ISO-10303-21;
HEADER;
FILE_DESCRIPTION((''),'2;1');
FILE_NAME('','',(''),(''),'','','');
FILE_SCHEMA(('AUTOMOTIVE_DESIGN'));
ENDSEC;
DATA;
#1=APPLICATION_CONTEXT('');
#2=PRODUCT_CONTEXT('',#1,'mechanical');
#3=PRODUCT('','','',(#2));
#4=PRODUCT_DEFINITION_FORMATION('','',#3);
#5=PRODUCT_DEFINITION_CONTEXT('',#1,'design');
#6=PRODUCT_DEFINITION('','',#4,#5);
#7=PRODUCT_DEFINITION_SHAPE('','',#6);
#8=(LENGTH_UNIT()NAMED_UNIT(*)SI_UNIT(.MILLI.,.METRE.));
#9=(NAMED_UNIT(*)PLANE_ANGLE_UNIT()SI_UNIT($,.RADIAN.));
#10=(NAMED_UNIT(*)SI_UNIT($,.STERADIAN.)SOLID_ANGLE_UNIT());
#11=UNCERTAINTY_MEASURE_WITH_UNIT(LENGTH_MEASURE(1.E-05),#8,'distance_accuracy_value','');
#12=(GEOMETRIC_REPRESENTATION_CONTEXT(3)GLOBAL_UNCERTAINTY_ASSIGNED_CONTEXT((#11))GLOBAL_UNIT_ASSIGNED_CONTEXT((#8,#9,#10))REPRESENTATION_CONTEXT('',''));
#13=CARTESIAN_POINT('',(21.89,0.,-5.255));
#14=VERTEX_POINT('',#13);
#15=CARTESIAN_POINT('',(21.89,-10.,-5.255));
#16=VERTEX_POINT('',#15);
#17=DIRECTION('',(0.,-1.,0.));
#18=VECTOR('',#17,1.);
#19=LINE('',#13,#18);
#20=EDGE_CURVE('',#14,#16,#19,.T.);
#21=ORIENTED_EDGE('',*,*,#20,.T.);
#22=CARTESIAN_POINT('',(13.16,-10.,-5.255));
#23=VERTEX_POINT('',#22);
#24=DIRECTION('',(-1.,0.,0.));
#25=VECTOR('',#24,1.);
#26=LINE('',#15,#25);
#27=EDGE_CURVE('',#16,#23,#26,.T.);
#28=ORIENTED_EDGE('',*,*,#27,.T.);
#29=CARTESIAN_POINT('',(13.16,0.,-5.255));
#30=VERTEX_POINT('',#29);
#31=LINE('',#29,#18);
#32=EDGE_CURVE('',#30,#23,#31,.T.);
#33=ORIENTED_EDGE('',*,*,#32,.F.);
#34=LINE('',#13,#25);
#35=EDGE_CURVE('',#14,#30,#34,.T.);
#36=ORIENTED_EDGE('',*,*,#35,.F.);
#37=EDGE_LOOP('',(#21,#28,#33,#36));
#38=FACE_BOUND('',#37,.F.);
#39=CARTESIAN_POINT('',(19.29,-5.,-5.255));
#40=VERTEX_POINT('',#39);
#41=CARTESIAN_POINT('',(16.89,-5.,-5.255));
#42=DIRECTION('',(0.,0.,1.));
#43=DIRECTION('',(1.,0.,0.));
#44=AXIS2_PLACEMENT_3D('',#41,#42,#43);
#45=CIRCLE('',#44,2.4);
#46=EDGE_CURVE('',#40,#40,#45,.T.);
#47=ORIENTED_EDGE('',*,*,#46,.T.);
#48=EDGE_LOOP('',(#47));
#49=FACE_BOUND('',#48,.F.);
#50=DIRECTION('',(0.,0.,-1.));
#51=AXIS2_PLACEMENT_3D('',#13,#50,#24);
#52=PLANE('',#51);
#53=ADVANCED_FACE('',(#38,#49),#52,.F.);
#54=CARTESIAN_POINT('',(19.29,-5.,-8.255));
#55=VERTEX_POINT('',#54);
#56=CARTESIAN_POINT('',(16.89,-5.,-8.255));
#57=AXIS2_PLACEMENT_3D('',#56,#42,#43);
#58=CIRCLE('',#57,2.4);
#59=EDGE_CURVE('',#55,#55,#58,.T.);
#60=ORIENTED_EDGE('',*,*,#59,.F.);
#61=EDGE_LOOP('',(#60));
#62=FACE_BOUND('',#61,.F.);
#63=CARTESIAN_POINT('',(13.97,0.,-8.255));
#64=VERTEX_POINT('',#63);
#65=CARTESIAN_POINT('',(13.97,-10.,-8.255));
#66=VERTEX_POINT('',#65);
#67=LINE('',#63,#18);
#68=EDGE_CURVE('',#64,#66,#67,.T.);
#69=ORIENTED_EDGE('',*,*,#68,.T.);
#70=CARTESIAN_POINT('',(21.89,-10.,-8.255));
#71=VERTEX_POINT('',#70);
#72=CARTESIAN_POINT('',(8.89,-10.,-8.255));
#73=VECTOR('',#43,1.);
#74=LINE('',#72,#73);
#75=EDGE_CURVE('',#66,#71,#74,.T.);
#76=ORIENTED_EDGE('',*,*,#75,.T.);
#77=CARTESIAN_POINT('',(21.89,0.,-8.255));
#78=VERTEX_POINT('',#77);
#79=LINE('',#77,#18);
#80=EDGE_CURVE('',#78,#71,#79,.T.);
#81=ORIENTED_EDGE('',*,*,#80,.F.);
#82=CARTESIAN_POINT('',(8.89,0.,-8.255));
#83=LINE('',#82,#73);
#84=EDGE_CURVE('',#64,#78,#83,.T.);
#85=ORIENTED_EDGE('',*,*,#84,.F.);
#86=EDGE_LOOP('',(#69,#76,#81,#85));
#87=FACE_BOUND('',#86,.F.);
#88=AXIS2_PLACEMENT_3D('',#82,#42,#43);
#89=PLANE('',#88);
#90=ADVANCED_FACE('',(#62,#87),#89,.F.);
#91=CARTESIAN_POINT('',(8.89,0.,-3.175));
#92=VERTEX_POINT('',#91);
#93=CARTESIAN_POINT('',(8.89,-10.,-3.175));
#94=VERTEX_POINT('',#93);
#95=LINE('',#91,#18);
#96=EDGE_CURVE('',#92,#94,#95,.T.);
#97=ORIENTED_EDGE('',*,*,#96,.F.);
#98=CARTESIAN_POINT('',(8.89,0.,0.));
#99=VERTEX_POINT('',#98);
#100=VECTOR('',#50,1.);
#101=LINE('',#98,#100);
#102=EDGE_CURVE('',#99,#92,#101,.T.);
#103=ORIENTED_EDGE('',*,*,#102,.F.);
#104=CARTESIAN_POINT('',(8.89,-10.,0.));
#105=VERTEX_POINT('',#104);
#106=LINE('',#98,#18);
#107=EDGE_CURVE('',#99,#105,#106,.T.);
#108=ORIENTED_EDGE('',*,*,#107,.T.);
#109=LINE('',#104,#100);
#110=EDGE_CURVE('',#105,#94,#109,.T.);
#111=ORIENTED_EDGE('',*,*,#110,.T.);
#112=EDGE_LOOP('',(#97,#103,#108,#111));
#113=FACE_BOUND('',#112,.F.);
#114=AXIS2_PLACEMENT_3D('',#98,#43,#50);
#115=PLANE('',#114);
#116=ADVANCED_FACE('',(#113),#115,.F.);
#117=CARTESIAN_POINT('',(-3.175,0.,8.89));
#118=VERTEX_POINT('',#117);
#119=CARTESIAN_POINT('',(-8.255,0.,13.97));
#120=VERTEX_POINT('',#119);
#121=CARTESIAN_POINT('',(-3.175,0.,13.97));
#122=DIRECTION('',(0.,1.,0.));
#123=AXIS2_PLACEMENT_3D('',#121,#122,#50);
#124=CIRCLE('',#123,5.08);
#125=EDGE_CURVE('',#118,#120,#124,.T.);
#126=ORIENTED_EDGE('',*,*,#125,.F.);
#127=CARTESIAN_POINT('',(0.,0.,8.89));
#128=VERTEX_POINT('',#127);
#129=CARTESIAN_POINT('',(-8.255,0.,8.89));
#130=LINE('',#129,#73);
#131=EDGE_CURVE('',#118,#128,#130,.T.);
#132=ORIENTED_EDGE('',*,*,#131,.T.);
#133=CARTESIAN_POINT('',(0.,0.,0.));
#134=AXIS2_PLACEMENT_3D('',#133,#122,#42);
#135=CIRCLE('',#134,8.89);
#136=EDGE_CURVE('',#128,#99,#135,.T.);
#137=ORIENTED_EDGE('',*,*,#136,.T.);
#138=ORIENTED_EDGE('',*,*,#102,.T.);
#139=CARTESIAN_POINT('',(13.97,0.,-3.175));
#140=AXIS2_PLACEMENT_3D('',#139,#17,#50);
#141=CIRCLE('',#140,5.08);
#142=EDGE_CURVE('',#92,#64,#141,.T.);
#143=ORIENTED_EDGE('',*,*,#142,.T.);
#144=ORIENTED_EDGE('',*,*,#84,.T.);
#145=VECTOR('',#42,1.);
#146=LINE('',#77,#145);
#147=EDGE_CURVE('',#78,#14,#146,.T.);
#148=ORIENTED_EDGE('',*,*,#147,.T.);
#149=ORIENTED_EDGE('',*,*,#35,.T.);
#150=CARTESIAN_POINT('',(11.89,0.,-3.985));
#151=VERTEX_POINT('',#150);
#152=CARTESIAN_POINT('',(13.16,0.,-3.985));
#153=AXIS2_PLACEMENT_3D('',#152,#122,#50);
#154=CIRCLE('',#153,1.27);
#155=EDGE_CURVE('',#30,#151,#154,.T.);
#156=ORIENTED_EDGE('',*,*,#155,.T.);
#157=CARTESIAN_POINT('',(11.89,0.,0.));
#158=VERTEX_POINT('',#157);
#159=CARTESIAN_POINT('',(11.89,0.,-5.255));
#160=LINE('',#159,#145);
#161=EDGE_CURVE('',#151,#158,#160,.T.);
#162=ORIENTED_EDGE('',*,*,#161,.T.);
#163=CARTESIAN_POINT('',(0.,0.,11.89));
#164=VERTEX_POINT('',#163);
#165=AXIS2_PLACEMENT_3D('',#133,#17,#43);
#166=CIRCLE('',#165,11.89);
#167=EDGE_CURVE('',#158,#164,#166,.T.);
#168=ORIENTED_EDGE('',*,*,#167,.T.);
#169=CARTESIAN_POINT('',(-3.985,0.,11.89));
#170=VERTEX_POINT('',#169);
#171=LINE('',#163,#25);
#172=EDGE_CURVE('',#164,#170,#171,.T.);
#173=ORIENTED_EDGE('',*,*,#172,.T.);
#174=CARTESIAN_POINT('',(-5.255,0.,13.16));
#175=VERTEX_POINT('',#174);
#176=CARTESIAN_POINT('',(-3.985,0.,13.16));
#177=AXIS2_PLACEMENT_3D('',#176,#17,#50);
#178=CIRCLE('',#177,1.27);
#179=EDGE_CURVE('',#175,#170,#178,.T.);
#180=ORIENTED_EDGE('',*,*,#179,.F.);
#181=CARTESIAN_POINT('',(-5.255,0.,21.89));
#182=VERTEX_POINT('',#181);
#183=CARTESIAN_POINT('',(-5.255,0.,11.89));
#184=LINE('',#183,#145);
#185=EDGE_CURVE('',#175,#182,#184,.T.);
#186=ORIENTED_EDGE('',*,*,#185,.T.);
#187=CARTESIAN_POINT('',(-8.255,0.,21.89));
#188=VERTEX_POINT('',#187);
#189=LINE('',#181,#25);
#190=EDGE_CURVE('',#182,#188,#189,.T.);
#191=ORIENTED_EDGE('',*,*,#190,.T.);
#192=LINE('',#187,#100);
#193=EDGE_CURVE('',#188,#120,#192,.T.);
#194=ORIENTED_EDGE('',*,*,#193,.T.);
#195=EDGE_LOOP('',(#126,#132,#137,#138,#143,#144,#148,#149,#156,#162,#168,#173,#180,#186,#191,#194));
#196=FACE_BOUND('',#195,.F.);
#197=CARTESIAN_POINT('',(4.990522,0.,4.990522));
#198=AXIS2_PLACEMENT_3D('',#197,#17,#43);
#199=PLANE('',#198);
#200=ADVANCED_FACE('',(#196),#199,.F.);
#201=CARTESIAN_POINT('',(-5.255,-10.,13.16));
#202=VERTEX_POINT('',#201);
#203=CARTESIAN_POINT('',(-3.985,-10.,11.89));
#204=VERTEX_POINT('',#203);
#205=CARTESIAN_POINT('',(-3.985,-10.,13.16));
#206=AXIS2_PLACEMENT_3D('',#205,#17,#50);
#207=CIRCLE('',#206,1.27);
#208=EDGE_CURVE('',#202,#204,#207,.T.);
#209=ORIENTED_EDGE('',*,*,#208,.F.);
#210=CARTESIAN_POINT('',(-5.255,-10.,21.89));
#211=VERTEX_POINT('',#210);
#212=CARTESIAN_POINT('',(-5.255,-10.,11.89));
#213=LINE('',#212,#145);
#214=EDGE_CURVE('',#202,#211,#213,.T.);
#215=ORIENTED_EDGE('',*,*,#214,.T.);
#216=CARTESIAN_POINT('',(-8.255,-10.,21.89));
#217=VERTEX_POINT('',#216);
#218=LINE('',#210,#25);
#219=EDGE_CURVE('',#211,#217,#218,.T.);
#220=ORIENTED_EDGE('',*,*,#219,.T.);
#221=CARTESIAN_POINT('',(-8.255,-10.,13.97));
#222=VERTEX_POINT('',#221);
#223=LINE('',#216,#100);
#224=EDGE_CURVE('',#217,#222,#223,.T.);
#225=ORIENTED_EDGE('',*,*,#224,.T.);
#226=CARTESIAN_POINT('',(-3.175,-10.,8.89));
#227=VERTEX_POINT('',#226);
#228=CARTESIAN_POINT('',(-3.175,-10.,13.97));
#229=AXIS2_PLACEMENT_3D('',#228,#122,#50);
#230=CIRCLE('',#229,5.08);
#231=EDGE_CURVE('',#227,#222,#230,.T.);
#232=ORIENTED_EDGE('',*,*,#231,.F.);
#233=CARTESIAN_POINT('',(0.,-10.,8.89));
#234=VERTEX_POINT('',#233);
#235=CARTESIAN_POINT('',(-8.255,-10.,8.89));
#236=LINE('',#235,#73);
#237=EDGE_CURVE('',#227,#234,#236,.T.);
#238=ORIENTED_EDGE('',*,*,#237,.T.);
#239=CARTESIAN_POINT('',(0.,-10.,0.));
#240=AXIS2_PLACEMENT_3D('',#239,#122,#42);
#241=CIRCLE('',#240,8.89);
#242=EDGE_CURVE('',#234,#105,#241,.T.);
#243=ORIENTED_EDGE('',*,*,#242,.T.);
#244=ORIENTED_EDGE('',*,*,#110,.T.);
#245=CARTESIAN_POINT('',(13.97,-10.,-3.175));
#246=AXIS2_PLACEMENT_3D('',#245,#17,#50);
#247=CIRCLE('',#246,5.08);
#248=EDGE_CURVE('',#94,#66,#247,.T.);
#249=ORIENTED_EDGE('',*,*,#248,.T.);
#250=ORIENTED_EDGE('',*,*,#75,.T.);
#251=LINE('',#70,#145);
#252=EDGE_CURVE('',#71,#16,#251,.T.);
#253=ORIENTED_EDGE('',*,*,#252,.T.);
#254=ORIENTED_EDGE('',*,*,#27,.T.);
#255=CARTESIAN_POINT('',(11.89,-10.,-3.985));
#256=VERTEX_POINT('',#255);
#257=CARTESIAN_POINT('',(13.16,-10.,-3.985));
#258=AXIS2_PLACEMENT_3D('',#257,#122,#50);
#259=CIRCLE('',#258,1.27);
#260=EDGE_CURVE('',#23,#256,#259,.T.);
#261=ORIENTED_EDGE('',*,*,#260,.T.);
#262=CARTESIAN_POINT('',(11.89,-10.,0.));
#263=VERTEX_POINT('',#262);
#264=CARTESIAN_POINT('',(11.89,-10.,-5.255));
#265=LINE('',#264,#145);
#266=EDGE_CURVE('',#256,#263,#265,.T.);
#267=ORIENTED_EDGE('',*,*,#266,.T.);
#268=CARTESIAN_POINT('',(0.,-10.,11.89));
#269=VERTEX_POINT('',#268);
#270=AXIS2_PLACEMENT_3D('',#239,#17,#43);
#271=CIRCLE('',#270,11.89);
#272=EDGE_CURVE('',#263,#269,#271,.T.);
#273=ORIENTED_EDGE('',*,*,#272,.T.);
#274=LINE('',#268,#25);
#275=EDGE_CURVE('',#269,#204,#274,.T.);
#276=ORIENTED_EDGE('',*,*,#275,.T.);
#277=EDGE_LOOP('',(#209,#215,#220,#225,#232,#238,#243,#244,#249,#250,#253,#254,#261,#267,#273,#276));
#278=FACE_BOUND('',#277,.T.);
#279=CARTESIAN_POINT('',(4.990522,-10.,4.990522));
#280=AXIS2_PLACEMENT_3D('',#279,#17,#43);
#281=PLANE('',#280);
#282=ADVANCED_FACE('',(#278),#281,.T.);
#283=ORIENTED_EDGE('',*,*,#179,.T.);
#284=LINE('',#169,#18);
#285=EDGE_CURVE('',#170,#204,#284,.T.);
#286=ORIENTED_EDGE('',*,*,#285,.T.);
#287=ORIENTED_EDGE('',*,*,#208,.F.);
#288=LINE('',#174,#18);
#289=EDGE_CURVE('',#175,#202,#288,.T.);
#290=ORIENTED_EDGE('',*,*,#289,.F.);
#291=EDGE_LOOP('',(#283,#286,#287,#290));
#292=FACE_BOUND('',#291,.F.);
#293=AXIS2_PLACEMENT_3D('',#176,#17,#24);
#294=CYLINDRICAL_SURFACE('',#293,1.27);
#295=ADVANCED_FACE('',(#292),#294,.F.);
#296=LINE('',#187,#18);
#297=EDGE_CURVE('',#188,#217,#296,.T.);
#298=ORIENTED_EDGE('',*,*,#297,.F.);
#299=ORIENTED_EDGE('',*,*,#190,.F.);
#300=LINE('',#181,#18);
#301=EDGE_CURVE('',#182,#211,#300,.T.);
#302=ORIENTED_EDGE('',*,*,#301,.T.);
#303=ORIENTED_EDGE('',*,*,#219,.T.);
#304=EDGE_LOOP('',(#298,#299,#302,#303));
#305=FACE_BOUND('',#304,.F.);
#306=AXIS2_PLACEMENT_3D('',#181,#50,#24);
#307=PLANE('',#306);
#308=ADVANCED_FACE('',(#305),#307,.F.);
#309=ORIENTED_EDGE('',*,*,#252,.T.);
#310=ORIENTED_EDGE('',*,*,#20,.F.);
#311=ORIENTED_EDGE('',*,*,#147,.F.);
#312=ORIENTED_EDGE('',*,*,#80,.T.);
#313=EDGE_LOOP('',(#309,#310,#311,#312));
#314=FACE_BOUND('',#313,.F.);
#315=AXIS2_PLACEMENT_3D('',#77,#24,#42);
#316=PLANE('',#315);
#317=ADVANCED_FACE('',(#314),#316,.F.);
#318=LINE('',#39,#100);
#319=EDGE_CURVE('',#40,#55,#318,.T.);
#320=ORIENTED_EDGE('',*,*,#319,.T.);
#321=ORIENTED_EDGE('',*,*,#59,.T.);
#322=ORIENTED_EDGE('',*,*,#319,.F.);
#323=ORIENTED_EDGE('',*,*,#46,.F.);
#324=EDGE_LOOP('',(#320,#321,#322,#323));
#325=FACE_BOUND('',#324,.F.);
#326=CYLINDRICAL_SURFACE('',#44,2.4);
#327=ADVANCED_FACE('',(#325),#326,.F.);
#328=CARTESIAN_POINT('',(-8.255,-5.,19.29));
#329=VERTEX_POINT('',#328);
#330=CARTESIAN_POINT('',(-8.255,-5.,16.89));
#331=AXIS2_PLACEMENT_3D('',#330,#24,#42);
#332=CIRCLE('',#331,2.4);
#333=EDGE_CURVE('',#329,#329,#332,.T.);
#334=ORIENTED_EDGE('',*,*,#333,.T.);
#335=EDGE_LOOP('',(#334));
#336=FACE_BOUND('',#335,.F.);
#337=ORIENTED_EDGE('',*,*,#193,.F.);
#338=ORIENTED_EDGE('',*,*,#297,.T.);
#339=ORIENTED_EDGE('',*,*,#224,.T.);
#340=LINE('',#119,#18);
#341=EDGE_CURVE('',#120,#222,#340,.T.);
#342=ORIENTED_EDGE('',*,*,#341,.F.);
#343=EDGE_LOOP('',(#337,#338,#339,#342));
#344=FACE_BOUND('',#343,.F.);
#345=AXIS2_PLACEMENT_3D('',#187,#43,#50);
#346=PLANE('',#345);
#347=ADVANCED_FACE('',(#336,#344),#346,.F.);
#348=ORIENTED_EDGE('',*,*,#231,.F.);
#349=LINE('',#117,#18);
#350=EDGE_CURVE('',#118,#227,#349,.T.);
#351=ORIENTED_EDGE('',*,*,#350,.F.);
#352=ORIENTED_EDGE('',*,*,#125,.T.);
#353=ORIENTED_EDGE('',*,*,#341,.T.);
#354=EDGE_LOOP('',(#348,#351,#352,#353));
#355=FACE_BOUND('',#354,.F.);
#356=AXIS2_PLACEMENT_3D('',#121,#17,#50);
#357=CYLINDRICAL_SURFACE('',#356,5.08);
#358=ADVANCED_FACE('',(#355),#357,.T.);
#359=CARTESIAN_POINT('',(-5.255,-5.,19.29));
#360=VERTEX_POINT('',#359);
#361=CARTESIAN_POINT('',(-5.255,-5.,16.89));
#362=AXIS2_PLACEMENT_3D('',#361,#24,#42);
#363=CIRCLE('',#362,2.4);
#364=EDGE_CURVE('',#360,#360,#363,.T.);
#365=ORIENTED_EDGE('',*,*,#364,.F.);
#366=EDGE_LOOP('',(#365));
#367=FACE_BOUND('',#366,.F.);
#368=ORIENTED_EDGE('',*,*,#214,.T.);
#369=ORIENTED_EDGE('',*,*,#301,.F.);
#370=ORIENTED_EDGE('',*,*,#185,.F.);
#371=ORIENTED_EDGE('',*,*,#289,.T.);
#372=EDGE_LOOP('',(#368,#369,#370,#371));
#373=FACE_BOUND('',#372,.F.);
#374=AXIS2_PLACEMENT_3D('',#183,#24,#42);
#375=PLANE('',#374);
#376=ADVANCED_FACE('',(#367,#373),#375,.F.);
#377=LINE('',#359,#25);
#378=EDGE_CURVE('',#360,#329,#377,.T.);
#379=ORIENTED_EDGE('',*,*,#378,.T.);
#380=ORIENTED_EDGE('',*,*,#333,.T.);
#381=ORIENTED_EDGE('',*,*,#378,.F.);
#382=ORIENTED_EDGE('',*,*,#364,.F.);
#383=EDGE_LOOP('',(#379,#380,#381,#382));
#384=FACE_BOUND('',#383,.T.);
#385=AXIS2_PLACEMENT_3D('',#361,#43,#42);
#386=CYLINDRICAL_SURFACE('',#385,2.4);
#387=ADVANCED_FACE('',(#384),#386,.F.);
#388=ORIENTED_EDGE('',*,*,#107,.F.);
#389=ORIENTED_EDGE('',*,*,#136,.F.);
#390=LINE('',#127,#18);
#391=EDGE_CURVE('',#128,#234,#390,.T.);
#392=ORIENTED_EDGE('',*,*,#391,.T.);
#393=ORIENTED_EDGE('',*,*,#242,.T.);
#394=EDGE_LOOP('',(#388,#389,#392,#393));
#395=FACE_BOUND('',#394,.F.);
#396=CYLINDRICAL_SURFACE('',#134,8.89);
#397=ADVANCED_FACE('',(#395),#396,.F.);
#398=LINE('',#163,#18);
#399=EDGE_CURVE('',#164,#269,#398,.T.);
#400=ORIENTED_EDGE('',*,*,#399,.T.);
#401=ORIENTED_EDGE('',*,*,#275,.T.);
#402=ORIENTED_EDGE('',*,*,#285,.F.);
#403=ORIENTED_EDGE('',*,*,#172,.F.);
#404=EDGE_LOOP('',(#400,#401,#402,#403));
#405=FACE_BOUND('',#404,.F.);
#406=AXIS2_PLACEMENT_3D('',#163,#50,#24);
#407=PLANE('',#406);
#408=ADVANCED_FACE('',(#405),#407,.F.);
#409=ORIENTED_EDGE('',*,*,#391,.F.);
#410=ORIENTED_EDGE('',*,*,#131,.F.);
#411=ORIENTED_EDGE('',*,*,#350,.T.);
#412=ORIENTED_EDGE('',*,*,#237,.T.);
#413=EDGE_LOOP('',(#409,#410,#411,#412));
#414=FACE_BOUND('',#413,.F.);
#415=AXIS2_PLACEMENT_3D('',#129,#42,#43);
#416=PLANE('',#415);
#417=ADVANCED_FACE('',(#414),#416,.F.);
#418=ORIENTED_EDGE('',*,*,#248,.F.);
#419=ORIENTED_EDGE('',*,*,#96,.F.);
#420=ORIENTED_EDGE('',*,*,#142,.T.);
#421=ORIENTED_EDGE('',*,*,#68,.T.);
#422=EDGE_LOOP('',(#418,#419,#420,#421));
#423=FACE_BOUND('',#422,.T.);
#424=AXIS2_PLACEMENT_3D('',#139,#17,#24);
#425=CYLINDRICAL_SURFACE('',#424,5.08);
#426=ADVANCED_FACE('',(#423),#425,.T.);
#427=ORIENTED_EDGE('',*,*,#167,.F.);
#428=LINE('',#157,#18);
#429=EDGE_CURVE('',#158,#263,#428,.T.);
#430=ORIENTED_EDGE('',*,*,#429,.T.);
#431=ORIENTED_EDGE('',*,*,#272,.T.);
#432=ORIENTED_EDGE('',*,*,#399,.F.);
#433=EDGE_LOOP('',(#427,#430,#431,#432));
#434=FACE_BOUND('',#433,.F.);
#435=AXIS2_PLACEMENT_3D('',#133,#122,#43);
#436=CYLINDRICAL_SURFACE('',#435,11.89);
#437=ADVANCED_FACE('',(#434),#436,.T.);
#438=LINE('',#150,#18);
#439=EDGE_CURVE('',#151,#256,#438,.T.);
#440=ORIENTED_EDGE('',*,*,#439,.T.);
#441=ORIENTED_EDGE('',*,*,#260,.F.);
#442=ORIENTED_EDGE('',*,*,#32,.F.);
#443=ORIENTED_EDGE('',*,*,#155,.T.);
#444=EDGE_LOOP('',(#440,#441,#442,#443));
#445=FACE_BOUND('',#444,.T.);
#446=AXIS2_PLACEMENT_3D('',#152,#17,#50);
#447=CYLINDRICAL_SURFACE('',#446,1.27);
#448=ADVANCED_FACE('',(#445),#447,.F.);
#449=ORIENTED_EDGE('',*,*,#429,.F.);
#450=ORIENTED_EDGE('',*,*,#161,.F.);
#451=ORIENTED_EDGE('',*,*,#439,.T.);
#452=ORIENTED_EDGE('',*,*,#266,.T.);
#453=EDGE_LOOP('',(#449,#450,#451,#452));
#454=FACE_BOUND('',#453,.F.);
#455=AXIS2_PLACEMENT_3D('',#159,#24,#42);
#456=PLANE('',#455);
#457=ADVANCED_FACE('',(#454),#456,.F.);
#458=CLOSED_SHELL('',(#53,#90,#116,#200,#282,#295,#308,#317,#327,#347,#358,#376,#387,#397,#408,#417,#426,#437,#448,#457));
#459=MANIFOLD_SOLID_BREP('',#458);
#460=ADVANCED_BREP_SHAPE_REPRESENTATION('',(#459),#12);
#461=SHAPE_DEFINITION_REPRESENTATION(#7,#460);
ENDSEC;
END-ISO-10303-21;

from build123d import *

# Parameters (mm, degrees)
F1_DEPTH = 10
F2_R     = 2.4
F3_DEPTH = 3
F7_R     = 5.08
F8_R     = 1.27


# Not quite as in the source:
# - a pattern or mirror of a feature is missing from the dataset's text; its kind, count and spacing are read off the source's solid


with BuildPart() as f1:
    # F0 (on Front) → F1 (new body)
    with BuildSketch(Plane.XZ):
        with BuildLine():
            ThreePointArc((0, 8.89), (6.2861792847, 6.2861792847), (8.89, 0))
            Line((8.89, 0), (8.89, -8.255))
            Line((8.89, -8.255), (21.89, -8.255))
            Line((21.89, -8.255), (21.89, -5.255))
            Line((21.89, -5.255), (11.89, -5.255))
            Line((11.89, -5.255), (11.89, 0))
            ThreePointArc((11.89, 0), (8.4074996283, 8.4074996283), (0, 11.89))
            Line((0, 11.89), (-5.255, 11.89))
            Line((-5.255, 11.89), (-5.255, 21.89))
            Line((-5.255, 21.89), (-8.255, 21.89))
            Line((-8.255, 21.89), (-8.255, 8.89))
            Line((-8.255, 8.89), (0, 8.89))
        make_face()
    extrude(amount=F1_DEPTH)

    # F2 (on face) → F3 (cut, through all)
    with BuildSketch(Plane.XY.offset(-5.255)):
        with Locations((16.89, -5)):
            Circle(F2_R)
    f3 = extrude(amount=-F3_DEPTH, mode=Mode.SUBTRACT)

    # F3_copies: F3 across plane
    add(f3.mirror(Plane(origin=(0, 0, 0), x_dir=(-0.7071067812, 0, -0.7071067812), z_dir=(-0.7071067812, 0, 0.7071067812))), mode=Mode.SUBTRACT)

    # F7
    f7_edges = [f1.edges().sort_by_distance(p)[0] for p in [
        (-8.255, -5, 8.89),
        (8.89, -5, -8.255),
    ]]
    fillet(f7_edges, radius=F7_R)

    # F8
    f8_edges = [f1.edges().sort_by_distance(p)[0] for p in [
        (-5.255, -5, 11.89),
        (11.89, -5, -5.255),
    ]]
    fillet(f8_edges, radius=F8_R)


solid = f1.part
